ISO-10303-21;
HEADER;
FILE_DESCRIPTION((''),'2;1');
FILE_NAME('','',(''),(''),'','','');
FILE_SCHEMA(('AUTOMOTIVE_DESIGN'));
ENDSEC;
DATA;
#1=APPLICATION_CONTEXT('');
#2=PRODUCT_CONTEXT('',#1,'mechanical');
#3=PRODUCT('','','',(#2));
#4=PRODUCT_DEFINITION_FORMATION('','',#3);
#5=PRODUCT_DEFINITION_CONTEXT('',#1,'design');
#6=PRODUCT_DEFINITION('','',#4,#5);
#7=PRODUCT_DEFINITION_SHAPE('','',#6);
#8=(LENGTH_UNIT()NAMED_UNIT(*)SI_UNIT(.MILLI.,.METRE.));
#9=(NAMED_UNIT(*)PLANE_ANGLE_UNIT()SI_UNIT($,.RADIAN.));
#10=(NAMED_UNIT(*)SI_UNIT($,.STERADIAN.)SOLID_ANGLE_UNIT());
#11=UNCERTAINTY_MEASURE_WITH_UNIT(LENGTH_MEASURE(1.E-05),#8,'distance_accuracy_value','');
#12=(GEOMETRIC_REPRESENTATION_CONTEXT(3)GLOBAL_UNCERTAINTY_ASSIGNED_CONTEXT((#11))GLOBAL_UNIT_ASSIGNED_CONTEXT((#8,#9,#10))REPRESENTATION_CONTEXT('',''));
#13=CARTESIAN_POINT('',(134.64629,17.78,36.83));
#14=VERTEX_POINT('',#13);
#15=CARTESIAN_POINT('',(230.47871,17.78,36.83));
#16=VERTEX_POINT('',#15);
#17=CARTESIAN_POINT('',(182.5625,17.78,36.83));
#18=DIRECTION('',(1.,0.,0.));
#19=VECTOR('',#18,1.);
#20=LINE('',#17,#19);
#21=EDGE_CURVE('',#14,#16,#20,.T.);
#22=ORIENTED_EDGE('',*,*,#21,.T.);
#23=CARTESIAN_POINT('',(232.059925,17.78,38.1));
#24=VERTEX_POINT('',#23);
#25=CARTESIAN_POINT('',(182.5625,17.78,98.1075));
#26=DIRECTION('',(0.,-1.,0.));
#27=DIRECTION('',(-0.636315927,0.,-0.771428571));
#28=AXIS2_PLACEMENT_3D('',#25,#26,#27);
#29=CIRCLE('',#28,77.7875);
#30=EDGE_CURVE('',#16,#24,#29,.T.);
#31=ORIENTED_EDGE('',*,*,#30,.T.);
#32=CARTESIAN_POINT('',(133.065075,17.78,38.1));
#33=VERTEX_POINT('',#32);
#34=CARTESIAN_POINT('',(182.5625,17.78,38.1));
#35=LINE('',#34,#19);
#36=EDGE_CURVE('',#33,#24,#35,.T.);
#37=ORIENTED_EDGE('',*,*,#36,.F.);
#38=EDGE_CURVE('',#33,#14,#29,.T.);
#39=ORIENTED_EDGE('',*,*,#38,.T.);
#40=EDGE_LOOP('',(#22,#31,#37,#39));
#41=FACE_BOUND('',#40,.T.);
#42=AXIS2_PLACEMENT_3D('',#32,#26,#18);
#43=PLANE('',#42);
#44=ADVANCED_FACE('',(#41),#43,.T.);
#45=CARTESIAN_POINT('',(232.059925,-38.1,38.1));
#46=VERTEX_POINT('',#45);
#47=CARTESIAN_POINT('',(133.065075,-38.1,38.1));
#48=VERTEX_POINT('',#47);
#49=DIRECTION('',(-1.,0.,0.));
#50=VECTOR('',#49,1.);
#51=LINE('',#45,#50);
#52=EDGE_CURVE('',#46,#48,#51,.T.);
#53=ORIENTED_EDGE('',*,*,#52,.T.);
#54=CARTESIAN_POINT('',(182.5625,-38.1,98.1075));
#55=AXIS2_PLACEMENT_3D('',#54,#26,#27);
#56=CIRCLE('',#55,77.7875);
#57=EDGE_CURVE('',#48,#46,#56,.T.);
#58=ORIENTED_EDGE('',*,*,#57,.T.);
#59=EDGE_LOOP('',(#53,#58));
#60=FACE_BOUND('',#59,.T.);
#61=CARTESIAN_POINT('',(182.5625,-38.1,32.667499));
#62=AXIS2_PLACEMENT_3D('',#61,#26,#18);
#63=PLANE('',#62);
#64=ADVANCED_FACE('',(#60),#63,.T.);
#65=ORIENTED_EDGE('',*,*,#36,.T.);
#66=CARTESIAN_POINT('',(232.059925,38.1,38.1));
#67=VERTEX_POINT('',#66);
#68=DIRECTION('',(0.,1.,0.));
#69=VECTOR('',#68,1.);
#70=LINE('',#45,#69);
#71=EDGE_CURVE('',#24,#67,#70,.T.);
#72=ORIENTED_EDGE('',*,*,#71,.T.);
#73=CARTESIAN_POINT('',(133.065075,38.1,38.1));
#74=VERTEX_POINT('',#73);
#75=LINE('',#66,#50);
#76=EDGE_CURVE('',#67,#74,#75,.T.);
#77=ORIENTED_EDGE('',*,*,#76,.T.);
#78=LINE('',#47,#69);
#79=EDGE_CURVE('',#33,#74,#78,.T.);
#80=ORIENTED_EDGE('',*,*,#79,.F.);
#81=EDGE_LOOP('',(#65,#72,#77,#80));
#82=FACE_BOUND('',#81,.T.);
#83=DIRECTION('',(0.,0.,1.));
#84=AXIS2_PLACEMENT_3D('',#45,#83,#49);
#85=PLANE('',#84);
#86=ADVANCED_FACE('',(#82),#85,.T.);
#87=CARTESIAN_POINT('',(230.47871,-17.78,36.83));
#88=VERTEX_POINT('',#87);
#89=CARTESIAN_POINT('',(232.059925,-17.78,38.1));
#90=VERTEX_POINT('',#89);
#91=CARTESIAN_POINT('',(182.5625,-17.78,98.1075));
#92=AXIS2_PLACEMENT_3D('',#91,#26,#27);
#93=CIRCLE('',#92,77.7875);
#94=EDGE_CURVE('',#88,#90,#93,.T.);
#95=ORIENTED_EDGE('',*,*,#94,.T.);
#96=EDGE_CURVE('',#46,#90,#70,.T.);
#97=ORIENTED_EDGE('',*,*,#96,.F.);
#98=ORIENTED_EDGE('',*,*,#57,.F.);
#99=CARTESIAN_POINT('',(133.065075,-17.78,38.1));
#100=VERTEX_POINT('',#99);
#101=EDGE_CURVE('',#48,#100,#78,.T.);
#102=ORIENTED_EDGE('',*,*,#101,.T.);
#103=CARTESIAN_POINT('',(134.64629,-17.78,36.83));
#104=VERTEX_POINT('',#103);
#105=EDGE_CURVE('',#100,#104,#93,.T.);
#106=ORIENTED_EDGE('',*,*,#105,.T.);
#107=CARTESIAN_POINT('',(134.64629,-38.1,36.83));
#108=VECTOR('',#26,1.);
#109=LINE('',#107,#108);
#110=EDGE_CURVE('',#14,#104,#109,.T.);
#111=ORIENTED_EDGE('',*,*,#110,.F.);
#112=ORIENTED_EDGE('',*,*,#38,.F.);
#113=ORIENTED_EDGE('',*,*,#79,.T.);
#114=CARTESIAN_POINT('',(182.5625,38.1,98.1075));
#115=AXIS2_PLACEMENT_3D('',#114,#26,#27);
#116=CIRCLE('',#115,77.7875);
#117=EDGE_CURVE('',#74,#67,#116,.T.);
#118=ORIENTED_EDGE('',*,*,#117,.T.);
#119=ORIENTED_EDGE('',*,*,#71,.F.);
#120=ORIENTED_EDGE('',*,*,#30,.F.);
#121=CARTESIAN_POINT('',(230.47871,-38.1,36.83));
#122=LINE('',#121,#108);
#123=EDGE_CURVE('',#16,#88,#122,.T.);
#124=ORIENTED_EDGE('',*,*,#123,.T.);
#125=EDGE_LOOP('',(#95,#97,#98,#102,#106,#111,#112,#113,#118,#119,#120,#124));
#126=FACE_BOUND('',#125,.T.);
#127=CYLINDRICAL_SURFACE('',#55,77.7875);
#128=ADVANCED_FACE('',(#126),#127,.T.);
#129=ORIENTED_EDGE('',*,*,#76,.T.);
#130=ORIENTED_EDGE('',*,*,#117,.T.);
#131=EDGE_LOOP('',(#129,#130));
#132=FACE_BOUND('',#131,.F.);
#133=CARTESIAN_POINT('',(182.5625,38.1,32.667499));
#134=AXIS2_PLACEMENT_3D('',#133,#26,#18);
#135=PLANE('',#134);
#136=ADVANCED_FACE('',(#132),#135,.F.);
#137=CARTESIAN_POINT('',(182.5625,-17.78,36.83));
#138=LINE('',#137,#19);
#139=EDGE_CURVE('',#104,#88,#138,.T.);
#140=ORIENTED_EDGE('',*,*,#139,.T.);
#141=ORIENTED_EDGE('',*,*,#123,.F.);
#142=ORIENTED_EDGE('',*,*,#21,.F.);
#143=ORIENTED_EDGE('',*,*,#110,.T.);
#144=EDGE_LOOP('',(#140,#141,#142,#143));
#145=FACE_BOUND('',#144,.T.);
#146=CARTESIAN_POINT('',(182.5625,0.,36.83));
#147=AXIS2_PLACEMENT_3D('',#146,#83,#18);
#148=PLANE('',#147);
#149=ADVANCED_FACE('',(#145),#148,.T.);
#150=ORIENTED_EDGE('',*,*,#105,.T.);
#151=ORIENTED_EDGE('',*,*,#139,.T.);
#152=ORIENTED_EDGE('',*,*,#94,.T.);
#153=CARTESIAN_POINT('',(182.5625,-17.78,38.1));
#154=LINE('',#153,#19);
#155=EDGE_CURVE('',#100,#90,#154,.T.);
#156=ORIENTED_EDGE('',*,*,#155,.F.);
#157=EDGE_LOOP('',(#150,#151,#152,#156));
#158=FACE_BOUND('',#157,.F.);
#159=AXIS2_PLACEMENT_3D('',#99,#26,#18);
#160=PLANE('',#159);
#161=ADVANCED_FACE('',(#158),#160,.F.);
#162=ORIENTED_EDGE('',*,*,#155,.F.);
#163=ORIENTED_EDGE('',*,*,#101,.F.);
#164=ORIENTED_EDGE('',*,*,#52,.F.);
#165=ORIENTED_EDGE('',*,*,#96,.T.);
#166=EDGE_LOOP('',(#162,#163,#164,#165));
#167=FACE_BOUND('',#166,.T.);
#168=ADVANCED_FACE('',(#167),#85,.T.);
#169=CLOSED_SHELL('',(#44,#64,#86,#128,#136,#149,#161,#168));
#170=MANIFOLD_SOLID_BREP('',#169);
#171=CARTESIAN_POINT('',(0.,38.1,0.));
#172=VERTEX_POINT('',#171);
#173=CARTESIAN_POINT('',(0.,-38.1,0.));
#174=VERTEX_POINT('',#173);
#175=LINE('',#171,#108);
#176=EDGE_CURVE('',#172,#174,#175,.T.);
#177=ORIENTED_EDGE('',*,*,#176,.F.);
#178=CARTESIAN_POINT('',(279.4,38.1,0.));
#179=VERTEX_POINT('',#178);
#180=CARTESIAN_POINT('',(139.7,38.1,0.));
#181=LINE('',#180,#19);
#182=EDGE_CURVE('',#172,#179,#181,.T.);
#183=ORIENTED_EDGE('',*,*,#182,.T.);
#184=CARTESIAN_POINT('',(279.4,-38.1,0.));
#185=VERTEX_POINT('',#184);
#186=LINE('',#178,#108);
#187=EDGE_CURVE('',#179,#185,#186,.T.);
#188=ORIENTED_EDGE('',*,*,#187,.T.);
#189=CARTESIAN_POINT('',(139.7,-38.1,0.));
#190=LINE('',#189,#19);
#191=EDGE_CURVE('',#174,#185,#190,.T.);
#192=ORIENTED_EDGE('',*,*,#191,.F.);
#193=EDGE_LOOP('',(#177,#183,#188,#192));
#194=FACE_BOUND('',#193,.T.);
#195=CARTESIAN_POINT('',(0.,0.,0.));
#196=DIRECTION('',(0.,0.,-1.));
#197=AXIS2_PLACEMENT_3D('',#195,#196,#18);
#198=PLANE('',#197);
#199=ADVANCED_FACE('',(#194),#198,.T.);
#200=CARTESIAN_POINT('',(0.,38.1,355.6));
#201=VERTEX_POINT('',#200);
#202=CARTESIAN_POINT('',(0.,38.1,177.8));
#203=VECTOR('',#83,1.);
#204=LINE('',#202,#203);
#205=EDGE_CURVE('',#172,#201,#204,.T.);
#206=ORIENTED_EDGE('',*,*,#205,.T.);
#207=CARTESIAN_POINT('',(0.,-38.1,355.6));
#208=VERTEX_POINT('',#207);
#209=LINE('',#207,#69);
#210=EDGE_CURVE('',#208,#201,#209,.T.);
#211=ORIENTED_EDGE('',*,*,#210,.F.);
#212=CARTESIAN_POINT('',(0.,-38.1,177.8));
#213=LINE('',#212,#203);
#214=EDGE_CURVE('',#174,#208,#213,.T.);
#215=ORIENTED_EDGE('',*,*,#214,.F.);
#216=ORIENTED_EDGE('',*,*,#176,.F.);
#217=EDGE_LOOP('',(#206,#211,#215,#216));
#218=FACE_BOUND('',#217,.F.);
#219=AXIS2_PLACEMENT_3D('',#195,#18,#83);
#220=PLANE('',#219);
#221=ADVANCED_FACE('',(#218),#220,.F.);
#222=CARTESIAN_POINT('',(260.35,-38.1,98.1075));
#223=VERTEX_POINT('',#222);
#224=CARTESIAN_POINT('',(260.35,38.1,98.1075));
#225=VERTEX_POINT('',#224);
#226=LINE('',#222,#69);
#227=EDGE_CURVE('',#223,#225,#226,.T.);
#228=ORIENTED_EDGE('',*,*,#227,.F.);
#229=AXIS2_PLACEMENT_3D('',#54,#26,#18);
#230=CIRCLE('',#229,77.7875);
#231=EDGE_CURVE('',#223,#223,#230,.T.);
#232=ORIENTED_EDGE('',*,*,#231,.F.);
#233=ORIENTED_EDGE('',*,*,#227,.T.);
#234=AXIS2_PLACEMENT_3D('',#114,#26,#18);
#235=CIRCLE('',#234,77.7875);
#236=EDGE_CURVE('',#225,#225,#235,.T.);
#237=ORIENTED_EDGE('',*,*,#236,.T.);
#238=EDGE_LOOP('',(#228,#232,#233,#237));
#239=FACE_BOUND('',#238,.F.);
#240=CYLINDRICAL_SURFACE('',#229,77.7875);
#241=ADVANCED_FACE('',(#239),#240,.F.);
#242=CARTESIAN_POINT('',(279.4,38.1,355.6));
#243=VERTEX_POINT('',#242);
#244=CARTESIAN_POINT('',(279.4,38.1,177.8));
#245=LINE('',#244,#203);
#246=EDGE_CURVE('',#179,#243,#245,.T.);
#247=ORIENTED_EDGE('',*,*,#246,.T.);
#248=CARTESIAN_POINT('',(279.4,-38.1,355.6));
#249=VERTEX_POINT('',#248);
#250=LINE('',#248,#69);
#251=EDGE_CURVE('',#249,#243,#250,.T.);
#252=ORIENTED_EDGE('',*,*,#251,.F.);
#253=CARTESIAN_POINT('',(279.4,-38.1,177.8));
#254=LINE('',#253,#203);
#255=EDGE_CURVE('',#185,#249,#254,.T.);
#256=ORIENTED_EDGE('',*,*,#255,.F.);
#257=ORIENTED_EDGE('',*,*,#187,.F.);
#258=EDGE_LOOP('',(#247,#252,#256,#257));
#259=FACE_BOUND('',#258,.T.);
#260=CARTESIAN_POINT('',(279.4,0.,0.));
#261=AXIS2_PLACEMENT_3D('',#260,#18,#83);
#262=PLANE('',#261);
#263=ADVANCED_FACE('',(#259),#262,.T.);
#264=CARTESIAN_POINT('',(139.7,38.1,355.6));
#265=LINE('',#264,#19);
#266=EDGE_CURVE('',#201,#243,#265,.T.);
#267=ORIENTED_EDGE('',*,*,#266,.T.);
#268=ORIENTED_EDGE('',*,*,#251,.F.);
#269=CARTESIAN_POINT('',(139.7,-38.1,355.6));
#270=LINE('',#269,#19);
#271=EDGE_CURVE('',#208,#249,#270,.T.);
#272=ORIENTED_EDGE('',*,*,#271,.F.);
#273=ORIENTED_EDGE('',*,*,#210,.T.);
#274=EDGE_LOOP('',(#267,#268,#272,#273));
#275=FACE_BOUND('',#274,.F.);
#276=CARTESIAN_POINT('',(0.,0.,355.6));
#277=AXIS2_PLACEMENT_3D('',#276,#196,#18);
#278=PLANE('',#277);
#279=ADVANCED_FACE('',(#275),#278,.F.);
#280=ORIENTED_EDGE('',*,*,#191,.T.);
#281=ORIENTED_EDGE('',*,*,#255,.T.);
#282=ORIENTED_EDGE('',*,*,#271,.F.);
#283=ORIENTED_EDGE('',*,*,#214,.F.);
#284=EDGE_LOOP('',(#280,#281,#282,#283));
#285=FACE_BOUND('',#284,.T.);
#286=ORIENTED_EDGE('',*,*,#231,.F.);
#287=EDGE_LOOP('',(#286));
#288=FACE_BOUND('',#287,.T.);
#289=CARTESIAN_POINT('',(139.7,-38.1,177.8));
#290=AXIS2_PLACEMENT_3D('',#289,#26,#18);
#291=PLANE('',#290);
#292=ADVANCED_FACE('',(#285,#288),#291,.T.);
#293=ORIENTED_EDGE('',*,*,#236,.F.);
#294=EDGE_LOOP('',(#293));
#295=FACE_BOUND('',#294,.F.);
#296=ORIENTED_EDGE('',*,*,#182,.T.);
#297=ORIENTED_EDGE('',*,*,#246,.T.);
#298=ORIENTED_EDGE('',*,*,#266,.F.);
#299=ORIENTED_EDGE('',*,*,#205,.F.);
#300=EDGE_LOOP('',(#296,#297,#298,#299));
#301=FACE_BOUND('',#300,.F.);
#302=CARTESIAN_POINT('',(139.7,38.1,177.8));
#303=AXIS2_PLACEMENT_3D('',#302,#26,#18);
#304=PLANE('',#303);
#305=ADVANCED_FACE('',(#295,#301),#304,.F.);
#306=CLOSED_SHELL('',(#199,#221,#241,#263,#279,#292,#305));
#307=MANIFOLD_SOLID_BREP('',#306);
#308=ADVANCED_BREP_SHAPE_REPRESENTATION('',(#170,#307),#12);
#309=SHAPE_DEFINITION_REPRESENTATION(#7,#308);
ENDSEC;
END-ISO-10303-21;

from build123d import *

# Parameters (mm, degrees)
F0_W     = 279.4
F0_H     = 355.6
F1_DEPTH = 38.1
F2_R     = 77.7875
F3_DEPTH = 76.201
F5_DEPTH = 76.2
F6_W     = 98.9948503711
F6_H     = 35.56
F7_DEPTH = 1.27


with BuildPart() as f1:
    # F0 (on Front) → F1 (new body, symmetric)
    with BuildSketch(Plane.XZ):
        with Locations((139.7, 177.8)):
            Rectangle(F0_W, F0_H)
    extrude(amount=F1_DEPTH, both=True)

    # F2 (on face) → F3 (cut, through all)
    with BuildSketch(Plane.XZ.offset(38.1)):
        with Locations((182.5625, 98.1075)):
            Circle(F2_R)
    extrude(amount=-F3_DEPTH, mode=Mode.SUBTRACT)


with BuildPart() as f5:
    # F4 (on face) → F5 (new body, through all)
    with BuildSketch(Plane.XZ.offset(38.1)):
        with BuildLine():
            Line((182.5625, 38.1), (133.0650748144, 38.1))
            ThreePointArc((133.0650748144, 38.1), (182.5625, 20.32), (232.0599251856, 38.1))
            Line((232.0599251856, 38.1), (182.5625, 38.1))
        make_face()
    extrude(amount=-F5_DEPTH)

    # F6 (on face) → F7 (cut)
    with BuildSketch(Plane.XY.offset(38.1)):
        with Locations((182.5625, 0)):
            Rectangle(F6_W, F6_H)
    extrude(amount=-F7_DEPTH, mode=Mode.SUBTRACT)


solid = Compound([f1.part, f5.part])
